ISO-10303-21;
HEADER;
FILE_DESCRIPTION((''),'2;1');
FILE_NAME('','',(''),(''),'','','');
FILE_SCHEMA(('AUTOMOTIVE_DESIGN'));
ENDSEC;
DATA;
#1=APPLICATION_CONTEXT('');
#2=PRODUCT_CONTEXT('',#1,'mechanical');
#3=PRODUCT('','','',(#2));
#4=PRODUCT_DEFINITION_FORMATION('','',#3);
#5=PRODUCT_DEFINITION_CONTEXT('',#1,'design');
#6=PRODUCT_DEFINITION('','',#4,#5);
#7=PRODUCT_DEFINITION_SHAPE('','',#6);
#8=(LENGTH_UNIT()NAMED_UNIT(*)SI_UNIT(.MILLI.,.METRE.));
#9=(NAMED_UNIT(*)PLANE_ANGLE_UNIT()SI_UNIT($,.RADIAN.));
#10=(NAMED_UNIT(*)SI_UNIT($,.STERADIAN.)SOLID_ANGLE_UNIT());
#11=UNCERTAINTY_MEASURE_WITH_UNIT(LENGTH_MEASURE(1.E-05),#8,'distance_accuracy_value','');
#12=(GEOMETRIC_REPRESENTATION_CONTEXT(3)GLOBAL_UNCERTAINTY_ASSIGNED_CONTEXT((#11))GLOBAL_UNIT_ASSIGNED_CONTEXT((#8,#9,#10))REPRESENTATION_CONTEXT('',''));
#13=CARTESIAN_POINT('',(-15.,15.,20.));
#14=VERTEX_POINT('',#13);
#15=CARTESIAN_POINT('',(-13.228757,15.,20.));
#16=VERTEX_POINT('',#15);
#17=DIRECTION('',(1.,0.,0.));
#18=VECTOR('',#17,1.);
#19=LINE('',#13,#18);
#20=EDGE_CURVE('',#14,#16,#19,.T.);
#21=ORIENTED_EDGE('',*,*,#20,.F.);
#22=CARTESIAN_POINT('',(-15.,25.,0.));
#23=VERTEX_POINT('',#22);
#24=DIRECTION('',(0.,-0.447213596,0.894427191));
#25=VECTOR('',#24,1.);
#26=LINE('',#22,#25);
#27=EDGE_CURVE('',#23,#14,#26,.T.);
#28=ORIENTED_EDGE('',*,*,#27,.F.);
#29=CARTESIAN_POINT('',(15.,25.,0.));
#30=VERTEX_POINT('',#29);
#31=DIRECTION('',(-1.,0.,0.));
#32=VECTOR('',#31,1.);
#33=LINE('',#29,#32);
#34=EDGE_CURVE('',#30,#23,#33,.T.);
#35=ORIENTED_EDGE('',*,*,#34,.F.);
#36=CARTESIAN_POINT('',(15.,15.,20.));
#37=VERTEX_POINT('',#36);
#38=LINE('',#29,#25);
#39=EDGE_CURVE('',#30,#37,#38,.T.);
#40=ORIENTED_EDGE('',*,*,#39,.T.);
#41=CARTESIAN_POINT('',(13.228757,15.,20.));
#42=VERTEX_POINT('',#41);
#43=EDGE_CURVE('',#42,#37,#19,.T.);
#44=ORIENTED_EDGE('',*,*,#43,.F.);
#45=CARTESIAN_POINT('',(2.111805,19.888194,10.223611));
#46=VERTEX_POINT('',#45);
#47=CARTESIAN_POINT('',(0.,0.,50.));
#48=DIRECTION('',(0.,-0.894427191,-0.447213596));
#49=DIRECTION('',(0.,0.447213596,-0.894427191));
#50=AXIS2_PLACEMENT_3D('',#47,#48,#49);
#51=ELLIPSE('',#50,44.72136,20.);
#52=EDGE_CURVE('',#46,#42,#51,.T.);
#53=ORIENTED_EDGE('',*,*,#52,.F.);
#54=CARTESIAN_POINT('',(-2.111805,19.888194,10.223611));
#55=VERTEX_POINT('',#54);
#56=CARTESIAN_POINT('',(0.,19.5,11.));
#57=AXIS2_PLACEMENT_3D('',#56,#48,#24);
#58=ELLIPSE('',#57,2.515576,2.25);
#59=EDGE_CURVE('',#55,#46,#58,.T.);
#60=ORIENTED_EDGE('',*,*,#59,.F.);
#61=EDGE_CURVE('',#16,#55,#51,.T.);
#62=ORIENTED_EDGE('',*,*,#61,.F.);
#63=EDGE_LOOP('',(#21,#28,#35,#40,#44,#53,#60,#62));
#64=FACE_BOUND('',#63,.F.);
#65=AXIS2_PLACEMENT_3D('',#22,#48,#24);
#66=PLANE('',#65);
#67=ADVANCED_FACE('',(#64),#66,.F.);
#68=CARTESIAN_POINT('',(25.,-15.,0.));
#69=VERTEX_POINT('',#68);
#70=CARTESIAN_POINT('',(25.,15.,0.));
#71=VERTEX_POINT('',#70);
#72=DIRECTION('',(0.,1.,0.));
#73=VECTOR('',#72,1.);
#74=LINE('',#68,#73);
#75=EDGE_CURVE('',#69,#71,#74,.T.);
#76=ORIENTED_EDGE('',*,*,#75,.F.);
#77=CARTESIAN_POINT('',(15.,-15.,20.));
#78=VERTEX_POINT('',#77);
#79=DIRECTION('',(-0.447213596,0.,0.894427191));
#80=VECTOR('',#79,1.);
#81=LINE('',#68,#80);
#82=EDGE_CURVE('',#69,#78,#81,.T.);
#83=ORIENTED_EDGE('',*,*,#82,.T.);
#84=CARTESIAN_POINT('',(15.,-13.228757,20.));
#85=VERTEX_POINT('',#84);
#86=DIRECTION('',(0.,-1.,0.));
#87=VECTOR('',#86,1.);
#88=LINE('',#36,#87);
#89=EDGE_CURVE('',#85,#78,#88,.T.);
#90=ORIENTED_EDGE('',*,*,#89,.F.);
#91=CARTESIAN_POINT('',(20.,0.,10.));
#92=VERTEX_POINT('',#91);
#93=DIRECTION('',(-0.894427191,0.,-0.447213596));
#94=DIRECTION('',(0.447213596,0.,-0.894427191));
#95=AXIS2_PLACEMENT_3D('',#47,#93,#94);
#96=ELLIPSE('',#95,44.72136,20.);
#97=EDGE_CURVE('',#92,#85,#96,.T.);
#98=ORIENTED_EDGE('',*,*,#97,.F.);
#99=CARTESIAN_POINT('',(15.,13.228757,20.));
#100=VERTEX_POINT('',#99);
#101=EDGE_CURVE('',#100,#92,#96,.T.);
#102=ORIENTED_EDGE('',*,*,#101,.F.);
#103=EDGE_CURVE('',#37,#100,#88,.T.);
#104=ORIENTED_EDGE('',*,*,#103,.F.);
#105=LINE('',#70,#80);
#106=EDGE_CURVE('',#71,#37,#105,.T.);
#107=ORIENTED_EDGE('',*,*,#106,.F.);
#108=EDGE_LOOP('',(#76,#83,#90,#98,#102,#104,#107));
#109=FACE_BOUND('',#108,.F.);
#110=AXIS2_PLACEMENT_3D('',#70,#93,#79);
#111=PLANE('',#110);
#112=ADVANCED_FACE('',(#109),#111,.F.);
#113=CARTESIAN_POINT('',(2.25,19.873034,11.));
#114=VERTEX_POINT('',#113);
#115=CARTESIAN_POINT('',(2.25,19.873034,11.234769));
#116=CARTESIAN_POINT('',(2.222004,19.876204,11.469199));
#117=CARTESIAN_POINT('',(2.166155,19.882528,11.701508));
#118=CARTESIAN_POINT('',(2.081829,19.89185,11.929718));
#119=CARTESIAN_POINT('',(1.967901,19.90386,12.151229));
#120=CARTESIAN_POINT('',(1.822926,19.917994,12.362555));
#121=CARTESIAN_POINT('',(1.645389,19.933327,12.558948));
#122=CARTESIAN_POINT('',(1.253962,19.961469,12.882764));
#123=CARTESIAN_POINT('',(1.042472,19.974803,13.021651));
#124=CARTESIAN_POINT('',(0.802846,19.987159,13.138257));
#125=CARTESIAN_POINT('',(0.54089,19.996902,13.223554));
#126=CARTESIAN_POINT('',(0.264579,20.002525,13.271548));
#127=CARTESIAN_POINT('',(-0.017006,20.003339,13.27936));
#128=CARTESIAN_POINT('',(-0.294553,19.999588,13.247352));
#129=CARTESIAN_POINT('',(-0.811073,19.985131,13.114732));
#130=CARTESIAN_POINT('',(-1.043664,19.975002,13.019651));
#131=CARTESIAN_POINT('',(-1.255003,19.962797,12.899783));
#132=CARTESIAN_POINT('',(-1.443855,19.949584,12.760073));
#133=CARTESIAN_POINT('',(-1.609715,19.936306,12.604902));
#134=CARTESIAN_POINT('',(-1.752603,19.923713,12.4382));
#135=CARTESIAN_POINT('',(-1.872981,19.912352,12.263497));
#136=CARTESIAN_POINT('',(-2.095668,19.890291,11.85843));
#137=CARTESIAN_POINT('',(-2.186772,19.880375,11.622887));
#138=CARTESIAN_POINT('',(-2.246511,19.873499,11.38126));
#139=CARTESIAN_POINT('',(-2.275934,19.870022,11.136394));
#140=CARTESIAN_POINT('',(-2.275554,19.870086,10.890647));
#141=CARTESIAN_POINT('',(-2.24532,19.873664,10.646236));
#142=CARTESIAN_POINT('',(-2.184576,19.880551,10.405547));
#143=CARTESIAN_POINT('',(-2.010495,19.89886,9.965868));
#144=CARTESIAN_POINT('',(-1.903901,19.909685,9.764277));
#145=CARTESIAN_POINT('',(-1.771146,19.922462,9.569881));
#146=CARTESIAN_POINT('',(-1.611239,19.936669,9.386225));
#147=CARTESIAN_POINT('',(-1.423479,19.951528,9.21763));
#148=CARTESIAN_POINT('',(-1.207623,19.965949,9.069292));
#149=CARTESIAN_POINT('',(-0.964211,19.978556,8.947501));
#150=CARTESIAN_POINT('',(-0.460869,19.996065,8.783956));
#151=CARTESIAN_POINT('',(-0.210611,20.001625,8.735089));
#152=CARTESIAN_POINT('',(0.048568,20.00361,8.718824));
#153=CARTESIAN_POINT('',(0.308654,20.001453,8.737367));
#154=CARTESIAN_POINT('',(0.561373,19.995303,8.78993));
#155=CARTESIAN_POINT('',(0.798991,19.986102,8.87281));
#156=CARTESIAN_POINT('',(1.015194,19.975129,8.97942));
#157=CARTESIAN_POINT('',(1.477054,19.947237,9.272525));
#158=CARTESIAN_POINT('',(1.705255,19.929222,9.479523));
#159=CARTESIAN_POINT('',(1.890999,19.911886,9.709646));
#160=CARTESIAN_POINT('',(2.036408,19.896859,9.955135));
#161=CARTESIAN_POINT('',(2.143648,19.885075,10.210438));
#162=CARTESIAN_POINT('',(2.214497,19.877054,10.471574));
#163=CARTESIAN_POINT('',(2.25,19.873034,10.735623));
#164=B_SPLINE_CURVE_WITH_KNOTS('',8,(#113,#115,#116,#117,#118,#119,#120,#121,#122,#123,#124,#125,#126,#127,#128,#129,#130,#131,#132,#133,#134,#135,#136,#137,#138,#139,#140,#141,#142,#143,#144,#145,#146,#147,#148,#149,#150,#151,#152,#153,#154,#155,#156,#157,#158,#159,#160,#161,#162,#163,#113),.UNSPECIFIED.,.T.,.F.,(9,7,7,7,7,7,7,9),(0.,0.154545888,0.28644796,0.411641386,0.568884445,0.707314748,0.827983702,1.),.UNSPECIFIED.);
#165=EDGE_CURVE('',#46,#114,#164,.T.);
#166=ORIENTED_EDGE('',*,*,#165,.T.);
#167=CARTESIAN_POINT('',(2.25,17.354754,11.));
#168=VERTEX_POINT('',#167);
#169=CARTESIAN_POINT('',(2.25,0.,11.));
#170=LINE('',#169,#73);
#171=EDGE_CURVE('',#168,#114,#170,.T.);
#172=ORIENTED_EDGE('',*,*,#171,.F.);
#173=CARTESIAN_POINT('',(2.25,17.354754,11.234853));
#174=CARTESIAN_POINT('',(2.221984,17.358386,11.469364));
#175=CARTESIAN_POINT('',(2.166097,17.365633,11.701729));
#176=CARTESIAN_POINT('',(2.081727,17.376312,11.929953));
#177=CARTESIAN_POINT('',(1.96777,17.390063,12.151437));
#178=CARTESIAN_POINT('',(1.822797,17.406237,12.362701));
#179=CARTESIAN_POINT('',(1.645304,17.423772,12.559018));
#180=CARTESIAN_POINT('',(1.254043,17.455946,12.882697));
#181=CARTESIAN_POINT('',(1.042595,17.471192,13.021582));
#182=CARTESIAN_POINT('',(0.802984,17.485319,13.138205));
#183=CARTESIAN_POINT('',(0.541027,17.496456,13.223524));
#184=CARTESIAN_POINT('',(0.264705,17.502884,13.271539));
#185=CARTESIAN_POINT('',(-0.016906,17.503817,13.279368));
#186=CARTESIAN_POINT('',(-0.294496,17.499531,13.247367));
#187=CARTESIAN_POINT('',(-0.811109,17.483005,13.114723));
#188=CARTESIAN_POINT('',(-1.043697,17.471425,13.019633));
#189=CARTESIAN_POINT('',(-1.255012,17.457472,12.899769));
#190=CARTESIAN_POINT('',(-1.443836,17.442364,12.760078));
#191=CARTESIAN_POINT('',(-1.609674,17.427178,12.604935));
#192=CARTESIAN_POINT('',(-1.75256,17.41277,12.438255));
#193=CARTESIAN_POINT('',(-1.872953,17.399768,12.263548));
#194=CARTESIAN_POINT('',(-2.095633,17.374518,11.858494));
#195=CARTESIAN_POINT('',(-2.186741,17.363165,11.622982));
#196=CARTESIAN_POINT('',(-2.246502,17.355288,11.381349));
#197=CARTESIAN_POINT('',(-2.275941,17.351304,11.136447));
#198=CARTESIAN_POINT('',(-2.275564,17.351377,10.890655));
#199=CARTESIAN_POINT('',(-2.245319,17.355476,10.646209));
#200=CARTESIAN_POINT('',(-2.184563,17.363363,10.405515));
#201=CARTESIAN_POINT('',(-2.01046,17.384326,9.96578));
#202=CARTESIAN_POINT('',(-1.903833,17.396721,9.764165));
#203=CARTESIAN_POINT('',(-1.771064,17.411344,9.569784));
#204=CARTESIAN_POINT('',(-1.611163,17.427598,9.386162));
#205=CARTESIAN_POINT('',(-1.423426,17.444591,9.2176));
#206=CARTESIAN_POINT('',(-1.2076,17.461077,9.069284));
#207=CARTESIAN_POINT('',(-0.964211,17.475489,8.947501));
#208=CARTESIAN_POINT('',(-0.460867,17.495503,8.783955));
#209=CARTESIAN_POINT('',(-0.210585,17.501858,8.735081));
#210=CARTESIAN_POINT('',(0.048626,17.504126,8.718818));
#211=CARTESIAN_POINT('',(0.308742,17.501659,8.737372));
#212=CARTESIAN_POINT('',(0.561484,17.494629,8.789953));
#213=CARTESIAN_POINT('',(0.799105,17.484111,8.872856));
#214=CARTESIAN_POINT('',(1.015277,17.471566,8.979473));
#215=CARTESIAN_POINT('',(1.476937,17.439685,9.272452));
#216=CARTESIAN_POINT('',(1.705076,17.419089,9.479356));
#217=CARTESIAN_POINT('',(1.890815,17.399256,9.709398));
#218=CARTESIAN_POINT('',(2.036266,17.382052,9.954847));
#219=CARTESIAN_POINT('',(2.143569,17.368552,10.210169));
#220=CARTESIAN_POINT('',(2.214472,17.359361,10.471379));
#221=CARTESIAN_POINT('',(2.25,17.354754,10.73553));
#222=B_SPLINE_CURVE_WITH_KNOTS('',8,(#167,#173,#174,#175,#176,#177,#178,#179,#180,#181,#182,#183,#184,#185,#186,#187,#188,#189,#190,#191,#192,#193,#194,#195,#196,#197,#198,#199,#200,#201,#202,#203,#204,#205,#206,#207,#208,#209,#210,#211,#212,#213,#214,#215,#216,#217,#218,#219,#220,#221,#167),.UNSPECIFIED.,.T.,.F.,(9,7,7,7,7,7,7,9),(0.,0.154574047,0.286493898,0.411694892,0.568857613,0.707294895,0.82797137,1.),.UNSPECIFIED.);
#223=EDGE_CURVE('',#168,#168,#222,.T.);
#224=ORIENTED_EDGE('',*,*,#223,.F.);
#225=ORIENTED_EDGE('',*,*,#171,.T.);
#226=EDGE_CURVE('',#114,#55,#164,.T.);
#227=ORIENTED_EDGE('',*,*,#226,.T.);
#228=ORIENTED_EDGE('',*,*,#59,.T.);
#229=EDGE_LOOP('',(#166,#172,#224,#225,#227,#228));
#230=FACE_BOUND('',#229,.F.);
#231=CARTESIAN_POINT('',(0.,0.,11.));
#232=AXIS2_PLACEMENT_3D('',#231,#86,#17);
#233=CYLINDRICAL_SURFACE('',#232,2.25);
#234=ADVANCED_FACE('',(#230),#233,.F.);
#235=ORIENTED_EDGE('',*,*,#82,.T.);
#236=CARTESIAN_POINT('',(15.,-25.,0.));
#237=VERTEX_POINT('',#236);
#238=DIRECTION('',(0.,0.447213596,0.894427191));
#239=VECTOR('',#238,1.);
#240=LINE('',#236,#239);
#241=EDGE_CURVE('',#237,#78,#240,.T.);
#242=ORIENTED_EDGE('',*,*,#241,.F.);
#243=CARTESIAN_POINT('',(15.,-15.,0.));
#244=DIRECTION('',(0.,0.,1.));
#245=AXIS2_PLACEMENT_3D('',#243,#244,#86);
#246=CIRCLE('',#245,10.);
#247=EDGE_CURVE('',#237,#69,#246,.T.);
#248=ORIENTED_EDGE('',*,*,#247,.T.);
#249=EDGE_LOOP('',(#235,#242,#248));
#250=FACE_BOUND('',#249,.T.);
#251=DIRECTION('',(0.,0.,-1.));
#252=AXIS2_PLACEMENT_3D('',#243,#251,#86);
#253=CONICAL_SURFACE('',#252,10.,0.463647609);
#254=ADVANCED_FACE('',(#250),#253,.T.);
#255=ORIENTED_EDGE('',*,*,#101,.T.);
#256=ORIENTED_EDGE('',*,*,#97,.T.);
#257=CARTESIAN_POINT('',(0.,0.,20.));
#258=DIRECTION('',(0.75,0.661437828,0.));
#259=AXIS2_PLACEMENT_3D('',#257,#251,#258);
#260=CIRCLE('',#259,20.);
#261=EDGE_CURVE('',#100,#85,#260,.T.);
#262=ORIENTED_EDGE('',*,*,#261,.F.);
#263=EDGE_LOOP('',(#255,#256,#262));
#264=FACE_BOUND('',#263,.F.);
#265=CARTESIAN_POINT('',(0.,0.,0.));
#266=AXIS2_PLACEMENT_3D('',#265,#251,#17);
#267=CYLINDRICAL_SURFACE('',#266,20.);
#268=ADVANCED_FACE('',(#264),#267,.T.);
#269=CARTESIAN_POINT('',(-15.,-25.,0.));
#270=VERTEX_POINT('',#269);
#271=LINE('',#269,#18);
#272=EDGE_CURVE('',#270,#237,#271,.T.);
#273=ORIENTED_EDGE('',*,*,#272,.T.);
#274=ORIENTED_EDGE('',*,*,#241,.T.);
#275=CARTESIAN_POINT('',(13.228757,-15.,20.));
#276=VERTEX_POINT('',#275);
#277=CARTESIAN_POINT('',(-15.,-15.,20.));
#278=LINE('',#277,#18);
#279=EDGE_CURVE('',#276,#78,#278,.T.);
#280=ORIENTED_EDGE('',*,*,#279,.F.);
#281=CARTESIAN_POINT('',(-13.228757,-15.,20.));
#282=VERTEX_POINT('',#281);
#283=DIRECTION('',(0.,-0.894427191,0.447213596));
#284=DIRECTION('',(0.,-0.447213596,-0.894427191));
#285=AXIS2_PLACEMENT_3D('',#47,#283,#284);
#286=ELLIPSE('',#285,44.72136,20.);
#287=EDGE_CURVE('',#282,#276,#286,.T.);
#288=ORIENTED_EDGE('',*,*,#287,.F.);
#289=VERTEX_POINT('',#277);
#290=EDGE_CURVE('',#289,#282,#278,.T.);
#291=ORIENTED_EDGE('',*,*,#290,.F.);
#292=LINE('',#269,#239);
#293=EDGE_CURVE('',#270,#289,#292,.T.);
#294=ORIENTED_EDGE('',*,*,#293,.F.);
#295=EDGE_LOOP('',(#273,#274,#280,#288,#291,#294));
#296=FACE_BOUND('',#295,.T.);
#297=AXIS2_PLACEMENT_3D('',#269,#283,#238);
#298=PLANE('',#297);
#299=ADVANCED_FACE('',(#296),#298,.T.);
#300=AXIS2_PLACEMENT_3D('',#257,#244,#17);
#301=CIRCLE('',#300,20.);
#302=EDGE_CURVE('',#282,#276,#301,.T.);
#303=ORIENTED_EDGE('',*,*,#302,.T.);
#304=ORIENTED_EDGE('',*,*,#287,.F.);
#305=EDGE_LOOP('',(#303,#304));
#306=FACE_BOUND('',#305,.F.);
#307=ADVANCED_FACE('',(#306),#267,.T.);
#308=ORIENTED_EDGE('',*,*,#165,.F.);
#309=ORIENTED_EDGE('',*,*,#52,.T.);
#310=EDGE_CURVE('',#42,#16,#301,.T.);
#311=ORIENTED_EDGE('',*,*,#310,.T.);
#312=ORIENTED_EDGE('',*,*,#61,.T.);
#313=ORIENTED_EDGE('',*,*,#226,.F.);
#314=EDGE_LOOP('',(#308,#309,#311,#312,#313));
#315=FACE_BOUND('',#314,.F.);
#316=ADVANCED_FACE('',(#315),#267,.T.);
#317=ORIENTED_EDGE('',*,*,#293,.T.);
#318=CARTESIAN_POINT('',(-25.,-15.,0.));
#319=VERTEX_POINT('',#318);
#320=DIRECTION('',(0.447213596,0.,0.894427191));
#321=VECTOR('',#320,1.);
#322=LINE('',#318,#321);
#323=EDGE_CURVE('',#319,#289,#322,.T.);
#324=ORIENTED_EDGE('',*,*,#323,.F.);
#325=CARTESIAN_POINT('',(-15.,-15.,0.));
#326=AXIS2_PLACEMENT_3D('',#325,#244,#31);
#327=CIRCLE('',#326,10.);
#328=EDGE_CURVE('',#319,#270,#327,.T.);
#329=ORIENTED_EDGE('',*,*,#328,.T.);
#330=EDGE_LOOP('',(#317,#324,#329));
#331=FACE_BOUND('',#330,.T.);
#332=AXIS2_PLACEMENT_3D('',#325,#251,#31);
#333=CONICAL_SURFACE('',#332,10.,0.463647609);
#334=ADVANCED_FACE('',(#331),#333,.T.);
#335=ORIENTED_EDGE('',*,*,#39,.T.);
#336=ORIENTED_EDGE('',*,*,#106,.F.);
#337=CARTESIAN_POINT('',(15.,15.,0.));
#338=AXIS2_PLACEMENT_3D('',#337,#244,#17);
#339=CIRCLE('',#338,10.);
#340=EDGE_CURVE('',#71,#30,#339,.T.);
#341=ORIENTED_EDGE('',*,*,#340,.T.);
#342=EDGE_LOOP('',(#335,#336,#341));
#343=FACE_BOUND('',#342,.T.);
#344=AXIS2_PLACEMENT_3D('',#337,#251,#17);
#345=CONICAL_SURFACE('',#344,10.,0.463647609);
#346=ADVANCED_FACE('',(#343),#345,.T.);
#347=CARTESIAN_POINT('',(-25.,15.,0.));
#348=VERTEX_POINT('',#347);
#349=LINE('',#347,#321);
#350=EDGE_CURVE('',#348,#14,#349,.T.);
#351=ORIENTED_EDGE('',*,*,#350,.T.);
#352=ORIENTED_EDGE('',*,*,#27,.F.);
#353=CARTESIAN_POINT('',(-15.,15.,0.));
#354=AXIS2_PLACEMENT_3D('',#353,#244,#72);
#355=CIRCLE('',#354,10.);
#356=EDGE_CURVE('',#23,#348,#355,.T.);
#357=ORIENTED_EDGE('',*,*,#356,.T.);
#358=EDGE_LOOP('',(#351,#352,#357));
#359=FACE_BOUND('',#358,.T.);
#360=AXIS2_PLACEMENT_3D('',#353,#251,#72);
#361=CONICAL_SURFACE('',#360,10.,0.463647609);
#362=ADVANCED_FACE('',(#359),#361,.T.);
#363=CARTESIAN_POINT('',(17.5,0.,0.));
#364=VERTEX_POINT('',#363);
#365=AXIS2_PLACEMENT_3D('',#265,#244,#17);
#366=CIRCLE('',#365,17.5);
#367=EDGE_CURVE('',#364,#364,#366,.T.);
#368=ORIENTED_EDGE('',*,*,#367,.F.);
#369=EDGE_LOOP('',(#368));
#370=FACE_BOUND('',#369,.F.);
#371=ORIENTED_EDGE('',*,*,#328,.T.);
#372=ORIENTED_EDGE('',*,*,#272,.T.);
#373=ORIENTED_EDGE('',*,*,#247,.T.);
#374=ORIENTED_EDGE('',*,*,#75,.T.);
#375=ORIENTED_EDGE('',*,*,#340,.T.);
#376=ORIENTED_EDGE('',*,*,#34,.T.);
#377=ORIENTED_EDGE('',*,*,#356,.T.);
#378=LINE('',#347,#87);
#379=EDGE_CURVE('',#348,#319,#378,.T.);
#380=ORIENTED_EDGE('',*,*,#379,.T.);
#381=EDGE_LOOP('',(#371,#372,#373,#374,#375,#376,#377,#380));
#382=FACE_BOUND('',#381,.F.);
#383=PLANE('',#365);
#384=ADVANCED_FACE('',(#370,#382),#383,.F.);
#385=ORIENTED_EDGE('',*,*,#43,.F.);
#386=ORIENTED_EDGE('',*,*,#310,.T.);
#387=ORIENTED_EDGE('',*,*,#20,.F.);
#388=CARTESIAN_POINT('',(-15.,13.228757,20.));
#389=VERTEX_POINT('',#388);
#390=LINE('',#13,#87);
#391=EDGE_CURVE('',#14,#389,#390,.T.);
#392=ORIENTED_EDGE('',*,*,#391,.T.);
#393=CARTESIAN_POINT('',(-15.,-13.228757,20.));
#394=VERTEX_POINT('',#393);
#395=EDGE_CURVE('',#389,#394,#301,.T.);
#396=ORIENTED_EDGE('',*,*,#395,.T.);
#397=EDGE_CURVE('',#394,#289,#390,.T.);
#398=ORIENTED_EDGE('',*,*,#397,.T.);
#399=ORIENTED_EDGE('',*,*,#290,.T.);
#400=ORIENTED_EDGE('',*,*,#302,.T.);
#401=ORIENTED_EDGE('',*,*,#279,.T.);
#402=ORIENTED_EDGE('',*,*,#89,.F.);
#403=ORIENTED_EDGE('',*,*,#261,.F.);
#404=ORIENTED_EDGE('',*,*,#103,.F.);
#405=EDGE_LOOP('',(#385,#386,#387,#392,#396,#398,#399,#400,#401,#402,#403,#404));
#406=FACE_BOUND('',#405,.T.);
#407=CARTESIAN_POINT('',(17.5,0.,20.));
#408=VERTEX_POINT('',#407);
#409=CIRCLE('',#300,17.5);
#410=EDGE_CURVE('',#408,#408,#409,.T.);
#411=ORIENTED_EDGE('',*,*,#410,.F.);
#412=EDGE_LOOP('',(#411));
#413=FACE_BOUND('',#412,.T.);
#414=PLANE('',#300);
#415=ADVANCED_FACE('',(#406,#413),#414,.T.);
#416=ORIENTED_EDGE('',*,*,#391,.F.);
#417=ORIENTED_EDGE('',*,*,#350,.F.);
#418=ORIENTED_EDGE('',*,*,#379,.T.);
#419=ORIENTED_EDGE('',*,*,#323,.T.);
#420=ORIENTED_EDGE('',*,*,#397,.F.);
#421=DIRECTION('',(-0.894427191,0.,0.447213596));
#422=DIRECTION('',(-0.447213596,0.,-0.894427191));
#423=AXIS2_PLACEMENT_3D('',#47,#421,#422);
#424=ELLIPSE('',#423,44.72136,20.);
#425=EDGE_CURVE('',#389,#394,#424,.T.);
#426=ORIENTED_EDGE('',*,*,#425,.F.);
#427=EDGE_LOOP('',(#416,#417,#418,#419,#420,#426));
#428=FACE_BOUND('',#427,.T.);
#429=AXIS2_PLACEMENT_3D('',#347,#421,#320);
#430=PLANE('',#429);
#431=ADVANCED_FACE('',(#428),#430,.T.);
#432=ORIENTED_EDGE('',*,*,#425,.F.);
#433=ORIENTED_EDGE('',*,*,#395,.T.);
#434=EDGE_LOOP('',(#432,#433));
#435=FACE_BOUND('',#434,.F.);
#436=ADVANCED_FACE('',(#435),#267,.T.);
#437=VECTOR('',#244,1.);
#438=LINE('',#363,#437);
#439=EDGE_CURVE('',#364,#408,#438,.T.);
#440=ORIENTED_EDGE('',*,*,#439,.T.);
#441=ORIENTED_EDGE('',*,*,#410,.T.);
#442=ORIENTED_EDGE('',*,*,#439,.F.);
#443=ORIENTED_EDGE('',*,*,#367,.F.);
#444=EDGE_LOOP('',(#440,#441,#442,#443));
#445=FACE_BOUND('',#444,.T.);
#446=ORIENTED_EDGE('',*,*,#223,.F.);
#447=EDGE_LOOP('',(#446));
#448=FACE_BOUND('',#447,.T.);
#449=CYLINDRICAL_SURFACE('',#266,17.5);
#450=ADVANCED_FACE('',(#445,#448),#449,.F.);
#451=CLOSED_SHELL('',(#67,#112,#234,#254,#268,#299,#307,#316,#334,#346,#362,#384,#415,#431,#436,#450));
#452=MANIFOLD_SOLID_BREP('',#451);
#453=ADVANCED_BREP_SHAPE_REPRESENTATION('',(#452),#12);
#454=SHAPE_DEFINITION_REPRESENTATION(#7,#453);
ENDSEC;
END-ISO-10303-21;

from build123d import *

# Parameters (mm, degrees)
F0_R         = 20
F1_DEPTH     = 20
F2_T1_DEPTH  = 30
F2_T3_DEPTH  = 30
F2_T6_ANGLE  = 90
F2_T8_ANGLE  = 90
F2_T10_ANGLE = 90
F2_T12_ANGLE = 90
F0_R_2       = 17.5
F3_DEPTH     = 20
F4_R         = 2.25
F5_DEPTH     = 25


# Not quite as in the source:
# - a fillet or chamfer that OpenCascade refuses, or shapes differently, is made with other operations: its cross-section is extruded or revolved along the edge and cut away or added


with BuildPart() as f1:
    # F0 (on Top) → F1 (new body)
    with BuildSketch(Plane.XY):
        with BuildLine():
            ThreePointArc((25, 15), (22.0710678119, 22.0710678119), (15, 25))
            Line((15, 25), (-15, 25))
            ThreePointArc((-15, 25), (-22.0710678119, 22.0710678119), (-25, 15))
            Line((-25, 15), (-25, -15))
            ThreePointArc((-25, -15), (-22.0710678119, -22.0710678119), (-15, -25))
            Line((-15, -25), (15, -25))
            ThreePointArc((15, -25), (22.0710678119, -22.0710678119), (25, -15))
            Line((25, -15), (25, 15))
        make_face()
        Circle(F0_R, mode=Mode.SUBTRACT)
    extrude(amount=F1_DEPTH)

    # F2: chamfer of 20 x 10 on 1 edges, made by hand

    # F2_s2 → F2_t1 (cut)
    with BuildSketch(Plane.YZ.offset(-15)):
        Polygon((-25, 0), (-15, 20), (-25, 20), align=None)
        Polygon((25, 0), (15, 20), (25, 20), align=None)
    extrude(amount=F2_T1_DEPTH, mode=Mode.SUBTRACT)

    # F2_s4 → F2_t3 (cut)
    with BuildSketch(Plane.XZ.offset(-15)):
        Polygon((25, 0), (15, 20), (25, 20), align=None)
        Polygon((-25, 0), (-15, 20), (-25, 20), align=None)
    extrude(amount=F2_T3_DEPTH, mode=Mode.SUBTRACT)

    # F2_s5 → F2_t6 (revolve, cut)
    with BuildSketch(Plane.XZ.offset(15)):
        Polygon((-25, 0), (-15, 20), (-25, 20), align=None)
    revolve(axis=Axis((-15, -15, 20), (0, 0, 1)), revolution_arc=F2_T6_ANGLE, mode=Mode.SUBTRACT)

    # F2_s7 → F2_t8 (revolve, cut)
    with BuildSketch(Plane.YZ.offset(15)):
        Polygon((-25, 0), (-15, 20), (-25, 20), align=None)
    revolve(axis=Axis((15, -15, 20), (0, 0, 1)), revolution_arc=F2_T8_ANGLE, mode=Mode.SUBTRACT)

    # F2_s9 → F2_t10 (revolve, cut)
    with BuildSketch(Plane.XZ.offset(-15)):
        Polygon((25, 0), (15, 20), (25, 20), align=None)
    revolve(axis=Axis((15, 15, 20), (0, 0, 1)), revolution_arc=F2_T10_ANGLE, mode=Mode.SUBTRACT)

    # F2_s11 → F2_t12 (revolve, cut)
    with BuildSketch(Plane.YZ.offset(-15)):
        Polygon((25, 0), (15, 20), (25, 20), align=None)
    revolve(axis=Axis((-15, 15, 20), (0, 0, 1)), revolution_arc=F2_T12_ANGLE, mode=Mode.SUBTRACT)

    # F0 (on Top) → F3 (join)
    with BuildSketch(Plane.XY):
        Circle(F0_R)
        Circle(F0_R_2, mode=Mode.SUBTRACT)
    extrude(amount=F3_DEPTH)

    # F4 (on Front) → F5 (cut)
    with BuildSketch(Plane.XZ):
        with Locations((0, 11)):
            Circle(F4_R)
    extrude(amount=-F5_DEPTH, mode=Mode.SUBTRACT)


solid = f1.part
